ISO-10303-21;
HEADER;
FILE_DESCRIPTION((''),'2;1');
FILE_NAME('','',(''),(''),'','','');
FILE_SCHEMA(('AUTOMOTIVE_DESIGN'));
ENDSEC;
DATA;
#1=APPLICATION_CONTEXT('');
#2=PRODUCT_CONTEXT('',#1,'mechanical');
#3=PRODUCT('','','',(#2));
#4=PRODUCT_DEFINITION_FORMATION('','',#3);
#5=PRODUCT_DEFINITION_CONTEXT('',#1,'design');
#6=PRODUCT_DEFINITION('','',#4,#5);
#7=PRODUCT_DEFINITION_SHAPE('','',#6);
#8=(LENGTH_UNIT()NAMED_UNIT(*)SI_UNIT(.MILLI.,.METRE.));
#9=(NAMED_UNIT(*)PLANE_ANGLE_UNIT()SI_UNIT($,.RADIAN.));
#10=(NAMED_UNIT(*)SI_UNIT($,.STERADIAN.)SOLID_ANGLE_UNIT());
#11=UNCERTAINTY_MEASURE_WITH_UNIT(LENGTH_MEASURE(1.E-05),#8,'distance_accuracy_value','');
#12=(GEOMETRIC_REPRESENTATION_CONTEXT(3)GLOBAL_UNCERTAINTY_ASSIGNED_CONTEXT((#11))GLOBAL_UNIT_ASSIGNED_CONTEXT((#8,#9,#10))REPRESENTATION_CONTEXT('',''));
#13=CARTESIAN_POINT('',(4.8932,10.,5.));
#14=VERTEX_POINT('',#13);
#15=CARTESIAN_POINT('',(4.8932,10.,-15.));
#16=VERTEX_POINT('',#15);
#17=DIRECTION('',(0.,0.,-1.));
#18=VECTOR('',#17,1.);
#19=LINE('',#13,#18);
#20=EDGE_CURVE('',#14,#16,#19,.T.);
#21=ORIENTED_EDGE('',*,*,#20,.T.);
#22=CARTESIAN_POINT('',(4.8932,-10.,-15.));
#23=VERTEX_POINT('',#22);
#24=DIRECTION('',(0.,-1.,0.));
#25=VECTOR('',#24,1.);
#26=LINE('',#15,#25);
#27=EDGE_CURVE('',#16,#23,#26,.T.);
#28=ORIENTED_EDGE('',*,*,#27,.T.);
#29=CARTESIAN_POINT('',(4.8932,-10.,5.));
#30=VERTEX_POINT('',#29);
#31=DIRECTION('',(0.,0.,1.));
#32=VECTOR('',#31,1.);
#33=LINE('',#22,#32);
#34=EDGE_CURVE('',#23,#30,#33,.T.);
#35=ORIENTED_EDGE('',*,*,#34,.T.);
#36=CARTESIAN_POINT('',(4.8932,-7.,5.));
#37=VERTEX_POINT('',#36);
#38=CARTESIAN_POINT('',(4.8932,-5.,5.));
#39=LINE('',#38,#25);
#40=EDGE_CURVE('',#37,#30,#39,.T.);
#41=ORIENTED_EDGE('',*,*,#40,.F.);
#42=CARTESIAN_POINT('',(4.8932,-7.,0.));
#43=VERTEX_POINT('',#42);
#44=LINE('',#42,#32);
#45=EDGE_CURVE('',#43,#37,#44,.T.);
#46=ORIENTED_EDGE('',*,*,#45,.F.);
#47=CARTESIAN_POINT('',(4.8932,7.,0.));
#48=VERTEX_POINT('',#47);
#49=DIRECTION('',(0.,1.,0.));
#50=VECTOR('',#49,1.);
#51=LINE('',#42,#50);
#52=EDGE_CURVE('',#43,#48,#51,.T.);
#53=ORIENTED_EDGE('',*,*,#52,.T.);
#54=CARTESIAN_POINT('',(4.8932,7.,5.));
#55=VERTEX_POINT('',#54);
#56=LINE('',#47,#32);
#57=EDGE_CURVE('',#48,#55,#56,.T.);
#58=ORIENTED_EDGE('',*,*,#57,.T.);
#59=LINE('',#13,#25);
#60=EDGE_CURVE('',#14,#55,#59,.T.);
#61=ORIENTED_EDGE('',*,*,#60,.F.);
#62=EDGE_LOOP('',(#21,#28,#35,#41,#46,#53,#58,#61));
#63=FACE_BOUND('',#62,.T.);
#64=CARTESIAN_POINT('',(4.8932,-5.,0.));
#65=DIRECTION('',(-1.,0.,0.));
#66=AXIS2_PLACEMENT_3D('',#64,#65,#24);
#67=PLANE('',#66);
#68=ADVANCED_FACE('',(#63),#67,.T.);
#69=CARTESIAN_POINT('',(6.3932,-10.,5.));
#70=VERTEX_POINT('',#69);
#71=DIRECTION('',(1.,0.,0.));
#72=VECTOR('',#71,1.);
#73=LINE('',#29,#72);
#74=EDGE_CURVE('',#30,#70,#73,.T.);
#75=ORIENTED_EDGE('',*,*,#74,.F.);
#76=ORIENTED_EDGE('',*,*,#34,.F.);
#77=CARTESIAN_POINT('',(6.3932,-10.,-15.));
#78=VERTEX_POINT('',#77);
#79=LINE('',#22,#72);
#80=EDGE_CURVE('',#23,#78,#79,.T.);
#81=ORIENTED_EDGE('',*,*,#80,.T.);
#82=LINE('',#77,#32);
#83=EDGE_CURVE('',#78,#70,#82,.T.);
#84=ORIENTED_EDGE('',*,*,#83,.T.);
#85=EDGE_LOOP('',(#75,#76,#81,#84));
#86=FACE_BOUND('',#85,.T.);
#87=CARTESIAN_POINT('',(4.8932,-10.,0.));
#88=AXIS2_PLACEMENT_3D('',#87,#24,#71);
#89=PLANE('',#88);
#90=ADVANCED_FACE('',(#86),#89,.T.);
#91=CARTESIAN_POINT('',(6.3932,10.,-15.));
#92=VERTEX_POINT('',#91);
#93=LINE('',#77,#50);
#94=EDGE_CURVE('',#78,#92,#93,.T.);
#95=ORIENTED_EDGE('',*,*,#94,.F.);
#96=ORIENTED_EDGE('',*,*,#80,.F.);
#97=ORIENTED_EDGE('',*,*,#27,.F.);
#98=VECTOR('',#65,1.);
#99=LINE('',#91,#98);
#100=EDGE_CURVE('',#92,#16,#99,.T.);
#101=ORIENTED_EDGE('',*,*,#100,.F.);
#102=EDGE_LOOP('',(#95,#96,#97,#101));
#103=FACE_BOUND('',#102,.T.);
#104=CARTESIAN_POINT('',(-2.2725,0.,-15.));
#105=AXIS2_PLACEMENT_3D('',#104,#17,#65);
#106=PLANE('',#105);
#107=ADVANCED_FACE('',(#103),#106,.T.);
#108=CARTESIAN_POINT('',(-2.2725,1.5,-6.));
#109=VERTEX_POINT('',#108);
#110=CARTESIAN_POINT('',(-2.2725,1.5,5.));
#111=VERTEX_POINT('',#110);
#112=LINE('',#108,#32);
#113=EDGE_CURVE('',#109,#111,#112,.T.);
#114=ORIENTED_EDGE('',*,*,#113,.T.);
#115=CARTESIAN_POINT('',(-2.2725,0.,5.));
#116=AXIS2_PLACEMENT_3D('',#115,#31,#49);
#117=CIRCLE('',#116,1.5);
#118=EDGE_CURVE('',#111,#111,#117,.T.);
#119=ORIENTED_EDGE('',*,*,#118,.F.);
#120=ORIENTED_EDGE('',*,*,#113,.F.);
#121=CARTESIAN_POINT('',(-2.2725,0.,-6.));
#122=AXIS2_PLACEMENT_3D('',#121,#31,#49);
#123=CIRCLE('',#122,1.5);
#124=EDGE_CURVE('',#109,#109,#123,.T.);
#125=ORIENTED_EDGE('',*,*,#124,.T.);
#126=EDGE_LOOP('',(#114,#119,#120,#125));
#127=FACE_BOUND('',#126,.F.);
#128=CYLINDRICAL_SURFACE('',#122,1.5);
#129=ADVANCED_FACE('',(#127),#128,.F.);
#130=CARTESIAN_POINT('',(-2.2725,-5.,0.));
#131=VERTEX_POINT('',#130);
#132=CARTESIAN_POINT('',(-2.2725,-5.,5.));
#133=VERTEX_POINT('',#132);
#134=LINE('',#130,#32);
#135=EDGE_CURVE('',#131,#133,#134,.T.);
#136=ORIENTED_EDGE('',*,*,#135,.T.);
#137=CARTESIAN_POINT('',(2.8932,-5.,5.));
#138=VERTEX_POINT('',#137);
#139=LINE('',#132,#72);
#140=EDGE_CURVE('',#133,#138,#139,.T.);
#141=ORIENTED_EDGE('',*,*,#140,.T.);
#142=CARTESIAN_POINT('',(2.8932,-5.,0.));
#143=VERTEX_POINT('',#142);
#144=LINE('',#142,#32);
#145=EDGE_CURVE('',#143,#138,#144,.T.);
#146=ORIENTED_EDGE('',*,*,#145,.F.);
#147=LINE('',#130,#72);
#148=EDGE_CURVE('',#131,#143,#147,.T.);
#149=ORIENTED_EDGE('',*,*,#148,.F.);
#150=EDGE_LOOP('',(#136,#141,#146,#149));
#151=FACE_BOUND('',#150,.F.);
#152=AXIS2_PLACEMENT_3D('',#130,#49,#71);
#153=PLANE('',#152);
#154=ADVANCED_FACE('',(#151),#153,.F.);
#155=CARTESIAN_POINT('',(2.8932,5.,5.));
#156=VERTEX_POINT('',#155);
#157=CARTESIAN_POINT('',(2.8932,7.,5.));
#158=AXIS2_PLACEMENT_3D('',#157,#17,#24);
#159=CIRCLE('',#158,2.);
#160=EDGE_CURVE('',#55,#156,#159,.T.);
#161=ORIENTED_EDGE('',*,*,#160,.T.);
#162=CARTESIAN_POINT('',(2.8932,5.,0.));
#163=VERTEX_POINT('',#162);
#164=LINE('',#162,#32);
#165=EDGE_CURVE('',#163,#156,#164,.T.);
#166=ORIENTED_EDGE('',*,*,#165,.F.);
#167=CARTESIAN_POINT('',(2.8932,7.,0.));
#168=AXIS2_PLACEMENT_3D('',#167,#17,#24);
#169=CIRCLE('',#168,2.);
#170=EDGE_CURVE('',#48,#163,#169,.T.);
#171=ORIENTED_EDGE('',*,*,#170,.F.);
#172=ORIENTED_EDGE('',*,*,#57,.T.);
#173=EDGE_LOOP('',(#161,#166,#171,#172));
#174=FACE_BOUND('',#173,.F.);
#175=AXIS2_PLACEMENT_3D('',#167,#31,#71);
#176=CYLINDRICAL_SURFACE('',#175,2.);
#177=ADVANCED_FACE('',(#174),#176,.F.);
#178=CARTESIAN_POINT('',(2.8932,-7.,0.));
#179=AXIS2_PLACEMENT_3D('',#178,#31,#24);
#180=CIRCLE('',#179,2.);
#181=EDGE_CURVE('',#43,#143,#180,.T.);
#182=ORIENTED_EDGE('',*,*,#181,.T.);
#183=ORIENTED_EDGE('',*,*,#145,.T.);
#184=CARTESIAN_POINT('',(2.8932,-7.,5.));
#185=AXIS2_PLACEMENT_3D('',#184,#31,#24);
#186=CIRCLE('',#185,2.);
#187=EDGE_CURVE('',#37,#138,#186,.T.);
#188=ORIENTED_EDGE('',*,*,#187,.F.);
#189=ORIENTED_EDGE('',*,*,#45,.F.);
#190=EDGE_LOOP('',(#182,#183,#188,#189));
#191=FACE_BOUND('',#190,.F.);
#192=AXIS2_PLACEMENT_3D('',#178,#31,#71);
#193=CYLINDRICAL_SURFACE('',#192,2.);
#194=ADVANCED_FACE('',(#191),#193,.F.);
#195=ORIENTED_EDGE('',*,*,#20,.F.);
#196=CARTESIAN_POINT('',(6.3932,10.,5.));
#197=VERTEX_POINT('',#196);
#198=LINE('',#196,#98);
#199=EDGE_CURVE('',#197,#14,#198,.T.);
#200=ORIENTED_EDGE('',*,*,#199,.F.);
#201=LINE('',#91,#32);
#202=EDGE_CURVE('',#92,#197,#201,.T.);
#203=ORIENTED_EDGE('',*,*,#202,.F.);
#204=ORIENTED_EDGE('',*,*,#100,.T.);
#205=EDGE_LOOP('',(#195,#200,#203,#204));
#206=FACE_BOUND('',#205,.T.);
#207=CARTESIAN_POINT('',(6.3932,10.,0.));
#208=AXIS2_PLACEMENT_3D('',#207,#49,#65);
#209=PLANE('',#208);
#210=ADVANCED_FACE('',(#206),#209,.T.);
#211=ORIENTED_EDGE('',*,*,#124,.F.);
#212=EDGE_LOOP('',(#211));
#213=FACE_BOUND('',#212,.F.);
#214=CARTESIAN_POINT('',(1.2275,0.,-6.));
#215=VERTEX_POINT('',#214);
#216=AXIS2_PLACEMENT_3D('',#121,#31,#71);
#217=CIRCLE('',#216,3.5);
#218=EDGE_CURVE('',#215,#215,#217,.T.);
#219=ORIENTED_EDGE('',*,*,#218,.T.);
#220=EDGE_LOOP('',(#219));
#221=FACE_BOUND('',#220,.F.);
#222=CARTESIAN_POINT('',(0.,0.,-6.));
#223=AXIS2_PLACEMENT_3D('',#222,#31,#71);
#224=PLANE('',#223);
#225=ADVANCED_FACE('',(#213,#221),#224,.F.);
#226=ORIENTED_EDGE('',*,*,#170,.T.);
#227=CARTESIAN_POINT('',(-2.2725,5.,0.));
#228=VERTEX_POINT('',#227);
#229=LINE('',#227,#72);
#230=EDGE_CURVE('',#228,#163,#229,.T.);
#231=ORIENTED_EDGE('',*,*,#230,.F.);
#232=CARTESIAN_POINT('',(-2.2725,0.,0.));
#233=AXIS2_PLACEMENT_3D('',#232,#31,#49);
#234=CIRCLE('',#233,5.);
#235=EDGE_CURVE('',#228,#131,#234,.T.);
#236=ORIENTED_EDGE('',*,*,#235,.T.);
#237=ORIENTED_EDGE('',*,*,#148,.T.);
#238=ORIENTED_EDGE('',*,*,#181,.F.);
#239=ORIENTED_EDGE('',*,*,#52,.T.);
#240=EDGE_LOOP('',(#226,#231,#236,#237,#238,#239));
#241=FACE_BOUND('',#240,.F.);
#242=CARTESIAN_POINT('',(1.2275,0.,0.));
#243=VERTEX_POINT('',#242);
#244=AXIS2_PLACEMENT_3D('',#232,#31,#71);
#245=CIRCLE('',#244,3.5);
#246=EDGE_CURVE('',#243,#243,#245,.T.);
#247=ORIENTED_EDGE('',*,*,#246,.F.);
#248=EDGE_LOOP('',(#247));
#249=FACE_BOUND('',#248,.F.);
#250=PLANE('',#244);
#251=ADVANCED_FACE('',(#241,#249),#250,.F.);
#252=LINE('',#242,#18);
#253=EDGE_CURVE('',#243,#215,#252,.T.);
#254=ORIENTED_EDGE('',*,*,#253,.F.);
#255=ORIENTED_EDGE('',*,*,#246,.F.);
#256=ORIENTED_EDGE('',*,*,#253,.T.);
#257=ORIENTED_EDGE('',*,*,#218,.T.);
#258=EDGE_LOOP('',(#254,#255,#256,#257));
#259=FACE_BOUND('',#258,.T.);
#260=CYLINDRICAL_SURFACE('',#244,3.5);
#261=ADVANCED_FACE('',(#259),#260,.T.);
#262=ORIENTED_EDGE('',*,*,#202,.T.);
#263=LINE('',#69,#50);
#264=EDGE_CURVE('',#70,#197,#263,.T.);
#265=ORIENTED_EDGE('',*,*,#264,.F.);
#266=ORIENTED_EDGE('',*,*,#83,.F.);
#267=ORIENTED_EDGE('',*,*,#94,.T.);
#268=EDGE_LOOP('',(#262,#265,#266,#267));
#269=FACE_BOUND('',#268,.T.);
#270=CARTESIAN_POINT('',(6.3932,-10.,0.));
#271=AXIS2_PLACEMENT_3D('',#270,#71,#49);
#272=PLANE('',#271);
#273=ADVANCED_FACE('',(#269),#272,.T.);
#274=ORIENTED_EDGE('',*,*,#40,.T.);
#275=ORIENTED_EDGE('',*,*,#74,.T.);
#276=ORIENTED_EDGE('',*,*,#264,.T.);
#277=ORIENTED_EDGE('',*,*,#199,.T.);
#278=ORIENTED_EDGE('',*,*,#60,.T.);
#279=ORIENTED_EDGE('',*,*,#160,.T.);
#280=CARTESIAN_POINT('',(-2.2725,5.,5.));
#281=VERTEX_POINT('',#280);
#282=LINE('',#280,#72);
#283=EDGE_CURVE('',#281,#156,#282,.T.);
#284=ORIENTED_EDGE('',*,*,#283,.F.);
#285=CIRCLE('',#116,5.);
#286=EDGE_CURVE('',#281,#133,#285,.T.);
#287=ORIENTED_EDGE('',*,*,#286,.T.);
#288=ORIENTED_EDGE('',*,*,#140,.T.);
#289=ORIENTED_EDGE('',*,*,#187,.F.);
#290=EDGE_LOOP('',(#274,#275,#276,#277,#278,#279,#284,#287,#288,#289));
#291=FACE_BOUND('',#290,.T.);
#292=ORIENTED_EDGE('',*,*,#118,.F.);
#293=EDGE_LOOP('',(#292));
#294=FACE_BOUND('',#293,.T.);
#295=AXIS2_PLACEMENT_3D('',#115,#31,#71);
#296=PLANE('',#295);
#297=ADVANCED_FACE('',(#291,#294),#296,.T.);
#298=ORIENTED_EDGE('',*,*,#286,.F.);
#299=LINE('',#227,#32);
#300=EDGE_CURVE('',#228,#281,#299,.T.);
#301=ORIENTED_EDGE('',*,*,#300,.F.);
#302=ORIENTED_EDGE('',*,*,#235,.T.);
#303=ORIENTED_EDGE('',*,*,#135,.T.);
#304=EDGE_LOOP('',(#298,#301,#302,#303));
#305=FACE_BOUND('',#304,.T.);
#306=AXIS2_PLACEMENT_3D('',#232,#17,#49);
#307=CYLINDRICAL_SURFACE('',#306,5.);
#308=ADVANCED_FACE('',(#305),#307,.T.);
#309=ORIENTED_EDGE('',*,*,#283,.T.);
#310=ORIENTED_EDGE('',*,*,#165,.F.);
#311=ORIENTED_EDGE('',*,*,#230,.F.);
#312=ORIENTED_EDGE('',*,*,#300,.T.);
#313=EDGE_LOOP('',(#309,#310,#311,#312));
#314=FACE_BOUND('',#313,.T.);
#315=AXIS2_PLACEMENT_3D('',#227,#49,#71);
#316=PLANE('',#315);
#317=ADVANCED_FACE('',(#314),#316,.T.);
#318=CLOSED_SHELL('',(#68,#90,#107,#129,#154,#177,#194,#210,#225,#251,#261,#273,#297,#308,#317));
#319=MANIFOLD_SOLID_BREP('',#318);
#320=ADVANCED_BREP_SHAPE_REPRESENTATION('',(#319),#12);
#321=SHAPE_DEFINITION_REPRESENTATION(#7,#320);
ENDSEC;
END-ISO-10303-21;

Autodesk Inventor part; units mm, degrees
ref_plane "YZ Plane" through (0, 0, 0) normal (1, 0, 0) x (0, 1, 0)
ref_plane "XZ Plane" through (0, 0, 0) normal (0, 1, 0) x (-1, 0, 0)
ref_plane "XY Plane" through (0, 0, 0) normal (0, 0, 1) x (1, 0, 0)
sketch "Sketch1" plane through (0, 0, 0) normal (0, 0, 1) x (1, 0, 0)
  circle A0 centre (-2.2725, 0) radius 4 projected
  circle A1 centre (-2.2725, 0) radius 3.5
  point P0 (0, 0)
  dimension "d0" = 0.5
extrude "Extrusion1" add sketch "Sketch1" against normal blind 6 contours A1
sketch "Sketch2" plane through (-2.2725, 0, 0) normal (0, 0, 1) x (1, 0, 0)
  circle A0 centre (0, 0) radius 3.5 projected
  arc A1 (0, 5) -> (0, -5) centre (0, 0) ccw
  line L0 (0, 5) -> (7.1657, 5)
  line L1 (0, -5) -> (7.1657, -5)
  line L2 (8.6657, 10) -> (7.1657, 10)
  line L3 (7.1657, -10) -> (8.6657, -10)
  line L4 (8.6657, -10) -> (8.6657, 10)
  line L5 (7.1657, 10) -> (7.1657, 5)
  line L6 (7.1657, -5) -> (7.1657, -10)
  point P0 (2.2725, 0)
  dimension "d3" = 10
  dimension "d5" = 20
  dimension "d6" = 5
  dimension "d7" = 5
  dimension "d8" = 1.5
  dimension "d11" = 1.5
extrude "Extrusion2" add sketch "Sketch2" along normal blind 5 contours A0 | L0 L5 L2 L4 L3 L6 L1 A1
sketch "Sketch3" plane through (-2.2725, 0, 0) normal (0, 0, -1) x (-1, 0, 0)
  arc A0 (0, -5) -> (0, 5) centre (0, 0) ccw projected
  line L0 (-7.1657, 5) -> (0, 5) projected
  line L1 (-7.1657, 10) -> (-7.1657, 5) projected
  line L2 (-8.6657, 10) -> (-7.1657, 10) projected
  line L3 (-8.6657, -10) -> (-8.6657, 10) projected
  line L4 (-7.1657, -10) -> (-8.6657, -10) projected
  line L5 (-7.1657, -5) -> (-7.1657, -10) projected
  line L6 (0, -5) -> (-7.1657, -5) projected
  circle A1 centre (0, 0) radius 3.5 projected
  line L7 (-7.1657, -5) -> (-7.1657, -10) projected
  line L8 (-7.1657, -5) -> (-7.1657, 5)
  point P0 (-2.2725, 0)
extrude "Extrusion3" add sketch "Sketch3" along normal blind 15 contours L5 L4 L3 L2 L1 L8
fillet "Fillet1" radius 2 2 edges at (4.8932, 5, 2.5) (4.8932, -5, 2.5)
sketch "Sketch4" plane through (-2.2725, 0, -6) normal (0, 0, -1) x (-1, 0, 0)
  circle A0 centre (0, 0) radius 3.5 projected
  point P0 (-2.2725, 0)
hole "Hole1" at (-2.2725, 0, -6) direction (0, 0, 1) diameter 3 end through all
equation "\"d7\" = d6"
equation "\"d11\" = d8"
properties part number "center_holder_boat"
